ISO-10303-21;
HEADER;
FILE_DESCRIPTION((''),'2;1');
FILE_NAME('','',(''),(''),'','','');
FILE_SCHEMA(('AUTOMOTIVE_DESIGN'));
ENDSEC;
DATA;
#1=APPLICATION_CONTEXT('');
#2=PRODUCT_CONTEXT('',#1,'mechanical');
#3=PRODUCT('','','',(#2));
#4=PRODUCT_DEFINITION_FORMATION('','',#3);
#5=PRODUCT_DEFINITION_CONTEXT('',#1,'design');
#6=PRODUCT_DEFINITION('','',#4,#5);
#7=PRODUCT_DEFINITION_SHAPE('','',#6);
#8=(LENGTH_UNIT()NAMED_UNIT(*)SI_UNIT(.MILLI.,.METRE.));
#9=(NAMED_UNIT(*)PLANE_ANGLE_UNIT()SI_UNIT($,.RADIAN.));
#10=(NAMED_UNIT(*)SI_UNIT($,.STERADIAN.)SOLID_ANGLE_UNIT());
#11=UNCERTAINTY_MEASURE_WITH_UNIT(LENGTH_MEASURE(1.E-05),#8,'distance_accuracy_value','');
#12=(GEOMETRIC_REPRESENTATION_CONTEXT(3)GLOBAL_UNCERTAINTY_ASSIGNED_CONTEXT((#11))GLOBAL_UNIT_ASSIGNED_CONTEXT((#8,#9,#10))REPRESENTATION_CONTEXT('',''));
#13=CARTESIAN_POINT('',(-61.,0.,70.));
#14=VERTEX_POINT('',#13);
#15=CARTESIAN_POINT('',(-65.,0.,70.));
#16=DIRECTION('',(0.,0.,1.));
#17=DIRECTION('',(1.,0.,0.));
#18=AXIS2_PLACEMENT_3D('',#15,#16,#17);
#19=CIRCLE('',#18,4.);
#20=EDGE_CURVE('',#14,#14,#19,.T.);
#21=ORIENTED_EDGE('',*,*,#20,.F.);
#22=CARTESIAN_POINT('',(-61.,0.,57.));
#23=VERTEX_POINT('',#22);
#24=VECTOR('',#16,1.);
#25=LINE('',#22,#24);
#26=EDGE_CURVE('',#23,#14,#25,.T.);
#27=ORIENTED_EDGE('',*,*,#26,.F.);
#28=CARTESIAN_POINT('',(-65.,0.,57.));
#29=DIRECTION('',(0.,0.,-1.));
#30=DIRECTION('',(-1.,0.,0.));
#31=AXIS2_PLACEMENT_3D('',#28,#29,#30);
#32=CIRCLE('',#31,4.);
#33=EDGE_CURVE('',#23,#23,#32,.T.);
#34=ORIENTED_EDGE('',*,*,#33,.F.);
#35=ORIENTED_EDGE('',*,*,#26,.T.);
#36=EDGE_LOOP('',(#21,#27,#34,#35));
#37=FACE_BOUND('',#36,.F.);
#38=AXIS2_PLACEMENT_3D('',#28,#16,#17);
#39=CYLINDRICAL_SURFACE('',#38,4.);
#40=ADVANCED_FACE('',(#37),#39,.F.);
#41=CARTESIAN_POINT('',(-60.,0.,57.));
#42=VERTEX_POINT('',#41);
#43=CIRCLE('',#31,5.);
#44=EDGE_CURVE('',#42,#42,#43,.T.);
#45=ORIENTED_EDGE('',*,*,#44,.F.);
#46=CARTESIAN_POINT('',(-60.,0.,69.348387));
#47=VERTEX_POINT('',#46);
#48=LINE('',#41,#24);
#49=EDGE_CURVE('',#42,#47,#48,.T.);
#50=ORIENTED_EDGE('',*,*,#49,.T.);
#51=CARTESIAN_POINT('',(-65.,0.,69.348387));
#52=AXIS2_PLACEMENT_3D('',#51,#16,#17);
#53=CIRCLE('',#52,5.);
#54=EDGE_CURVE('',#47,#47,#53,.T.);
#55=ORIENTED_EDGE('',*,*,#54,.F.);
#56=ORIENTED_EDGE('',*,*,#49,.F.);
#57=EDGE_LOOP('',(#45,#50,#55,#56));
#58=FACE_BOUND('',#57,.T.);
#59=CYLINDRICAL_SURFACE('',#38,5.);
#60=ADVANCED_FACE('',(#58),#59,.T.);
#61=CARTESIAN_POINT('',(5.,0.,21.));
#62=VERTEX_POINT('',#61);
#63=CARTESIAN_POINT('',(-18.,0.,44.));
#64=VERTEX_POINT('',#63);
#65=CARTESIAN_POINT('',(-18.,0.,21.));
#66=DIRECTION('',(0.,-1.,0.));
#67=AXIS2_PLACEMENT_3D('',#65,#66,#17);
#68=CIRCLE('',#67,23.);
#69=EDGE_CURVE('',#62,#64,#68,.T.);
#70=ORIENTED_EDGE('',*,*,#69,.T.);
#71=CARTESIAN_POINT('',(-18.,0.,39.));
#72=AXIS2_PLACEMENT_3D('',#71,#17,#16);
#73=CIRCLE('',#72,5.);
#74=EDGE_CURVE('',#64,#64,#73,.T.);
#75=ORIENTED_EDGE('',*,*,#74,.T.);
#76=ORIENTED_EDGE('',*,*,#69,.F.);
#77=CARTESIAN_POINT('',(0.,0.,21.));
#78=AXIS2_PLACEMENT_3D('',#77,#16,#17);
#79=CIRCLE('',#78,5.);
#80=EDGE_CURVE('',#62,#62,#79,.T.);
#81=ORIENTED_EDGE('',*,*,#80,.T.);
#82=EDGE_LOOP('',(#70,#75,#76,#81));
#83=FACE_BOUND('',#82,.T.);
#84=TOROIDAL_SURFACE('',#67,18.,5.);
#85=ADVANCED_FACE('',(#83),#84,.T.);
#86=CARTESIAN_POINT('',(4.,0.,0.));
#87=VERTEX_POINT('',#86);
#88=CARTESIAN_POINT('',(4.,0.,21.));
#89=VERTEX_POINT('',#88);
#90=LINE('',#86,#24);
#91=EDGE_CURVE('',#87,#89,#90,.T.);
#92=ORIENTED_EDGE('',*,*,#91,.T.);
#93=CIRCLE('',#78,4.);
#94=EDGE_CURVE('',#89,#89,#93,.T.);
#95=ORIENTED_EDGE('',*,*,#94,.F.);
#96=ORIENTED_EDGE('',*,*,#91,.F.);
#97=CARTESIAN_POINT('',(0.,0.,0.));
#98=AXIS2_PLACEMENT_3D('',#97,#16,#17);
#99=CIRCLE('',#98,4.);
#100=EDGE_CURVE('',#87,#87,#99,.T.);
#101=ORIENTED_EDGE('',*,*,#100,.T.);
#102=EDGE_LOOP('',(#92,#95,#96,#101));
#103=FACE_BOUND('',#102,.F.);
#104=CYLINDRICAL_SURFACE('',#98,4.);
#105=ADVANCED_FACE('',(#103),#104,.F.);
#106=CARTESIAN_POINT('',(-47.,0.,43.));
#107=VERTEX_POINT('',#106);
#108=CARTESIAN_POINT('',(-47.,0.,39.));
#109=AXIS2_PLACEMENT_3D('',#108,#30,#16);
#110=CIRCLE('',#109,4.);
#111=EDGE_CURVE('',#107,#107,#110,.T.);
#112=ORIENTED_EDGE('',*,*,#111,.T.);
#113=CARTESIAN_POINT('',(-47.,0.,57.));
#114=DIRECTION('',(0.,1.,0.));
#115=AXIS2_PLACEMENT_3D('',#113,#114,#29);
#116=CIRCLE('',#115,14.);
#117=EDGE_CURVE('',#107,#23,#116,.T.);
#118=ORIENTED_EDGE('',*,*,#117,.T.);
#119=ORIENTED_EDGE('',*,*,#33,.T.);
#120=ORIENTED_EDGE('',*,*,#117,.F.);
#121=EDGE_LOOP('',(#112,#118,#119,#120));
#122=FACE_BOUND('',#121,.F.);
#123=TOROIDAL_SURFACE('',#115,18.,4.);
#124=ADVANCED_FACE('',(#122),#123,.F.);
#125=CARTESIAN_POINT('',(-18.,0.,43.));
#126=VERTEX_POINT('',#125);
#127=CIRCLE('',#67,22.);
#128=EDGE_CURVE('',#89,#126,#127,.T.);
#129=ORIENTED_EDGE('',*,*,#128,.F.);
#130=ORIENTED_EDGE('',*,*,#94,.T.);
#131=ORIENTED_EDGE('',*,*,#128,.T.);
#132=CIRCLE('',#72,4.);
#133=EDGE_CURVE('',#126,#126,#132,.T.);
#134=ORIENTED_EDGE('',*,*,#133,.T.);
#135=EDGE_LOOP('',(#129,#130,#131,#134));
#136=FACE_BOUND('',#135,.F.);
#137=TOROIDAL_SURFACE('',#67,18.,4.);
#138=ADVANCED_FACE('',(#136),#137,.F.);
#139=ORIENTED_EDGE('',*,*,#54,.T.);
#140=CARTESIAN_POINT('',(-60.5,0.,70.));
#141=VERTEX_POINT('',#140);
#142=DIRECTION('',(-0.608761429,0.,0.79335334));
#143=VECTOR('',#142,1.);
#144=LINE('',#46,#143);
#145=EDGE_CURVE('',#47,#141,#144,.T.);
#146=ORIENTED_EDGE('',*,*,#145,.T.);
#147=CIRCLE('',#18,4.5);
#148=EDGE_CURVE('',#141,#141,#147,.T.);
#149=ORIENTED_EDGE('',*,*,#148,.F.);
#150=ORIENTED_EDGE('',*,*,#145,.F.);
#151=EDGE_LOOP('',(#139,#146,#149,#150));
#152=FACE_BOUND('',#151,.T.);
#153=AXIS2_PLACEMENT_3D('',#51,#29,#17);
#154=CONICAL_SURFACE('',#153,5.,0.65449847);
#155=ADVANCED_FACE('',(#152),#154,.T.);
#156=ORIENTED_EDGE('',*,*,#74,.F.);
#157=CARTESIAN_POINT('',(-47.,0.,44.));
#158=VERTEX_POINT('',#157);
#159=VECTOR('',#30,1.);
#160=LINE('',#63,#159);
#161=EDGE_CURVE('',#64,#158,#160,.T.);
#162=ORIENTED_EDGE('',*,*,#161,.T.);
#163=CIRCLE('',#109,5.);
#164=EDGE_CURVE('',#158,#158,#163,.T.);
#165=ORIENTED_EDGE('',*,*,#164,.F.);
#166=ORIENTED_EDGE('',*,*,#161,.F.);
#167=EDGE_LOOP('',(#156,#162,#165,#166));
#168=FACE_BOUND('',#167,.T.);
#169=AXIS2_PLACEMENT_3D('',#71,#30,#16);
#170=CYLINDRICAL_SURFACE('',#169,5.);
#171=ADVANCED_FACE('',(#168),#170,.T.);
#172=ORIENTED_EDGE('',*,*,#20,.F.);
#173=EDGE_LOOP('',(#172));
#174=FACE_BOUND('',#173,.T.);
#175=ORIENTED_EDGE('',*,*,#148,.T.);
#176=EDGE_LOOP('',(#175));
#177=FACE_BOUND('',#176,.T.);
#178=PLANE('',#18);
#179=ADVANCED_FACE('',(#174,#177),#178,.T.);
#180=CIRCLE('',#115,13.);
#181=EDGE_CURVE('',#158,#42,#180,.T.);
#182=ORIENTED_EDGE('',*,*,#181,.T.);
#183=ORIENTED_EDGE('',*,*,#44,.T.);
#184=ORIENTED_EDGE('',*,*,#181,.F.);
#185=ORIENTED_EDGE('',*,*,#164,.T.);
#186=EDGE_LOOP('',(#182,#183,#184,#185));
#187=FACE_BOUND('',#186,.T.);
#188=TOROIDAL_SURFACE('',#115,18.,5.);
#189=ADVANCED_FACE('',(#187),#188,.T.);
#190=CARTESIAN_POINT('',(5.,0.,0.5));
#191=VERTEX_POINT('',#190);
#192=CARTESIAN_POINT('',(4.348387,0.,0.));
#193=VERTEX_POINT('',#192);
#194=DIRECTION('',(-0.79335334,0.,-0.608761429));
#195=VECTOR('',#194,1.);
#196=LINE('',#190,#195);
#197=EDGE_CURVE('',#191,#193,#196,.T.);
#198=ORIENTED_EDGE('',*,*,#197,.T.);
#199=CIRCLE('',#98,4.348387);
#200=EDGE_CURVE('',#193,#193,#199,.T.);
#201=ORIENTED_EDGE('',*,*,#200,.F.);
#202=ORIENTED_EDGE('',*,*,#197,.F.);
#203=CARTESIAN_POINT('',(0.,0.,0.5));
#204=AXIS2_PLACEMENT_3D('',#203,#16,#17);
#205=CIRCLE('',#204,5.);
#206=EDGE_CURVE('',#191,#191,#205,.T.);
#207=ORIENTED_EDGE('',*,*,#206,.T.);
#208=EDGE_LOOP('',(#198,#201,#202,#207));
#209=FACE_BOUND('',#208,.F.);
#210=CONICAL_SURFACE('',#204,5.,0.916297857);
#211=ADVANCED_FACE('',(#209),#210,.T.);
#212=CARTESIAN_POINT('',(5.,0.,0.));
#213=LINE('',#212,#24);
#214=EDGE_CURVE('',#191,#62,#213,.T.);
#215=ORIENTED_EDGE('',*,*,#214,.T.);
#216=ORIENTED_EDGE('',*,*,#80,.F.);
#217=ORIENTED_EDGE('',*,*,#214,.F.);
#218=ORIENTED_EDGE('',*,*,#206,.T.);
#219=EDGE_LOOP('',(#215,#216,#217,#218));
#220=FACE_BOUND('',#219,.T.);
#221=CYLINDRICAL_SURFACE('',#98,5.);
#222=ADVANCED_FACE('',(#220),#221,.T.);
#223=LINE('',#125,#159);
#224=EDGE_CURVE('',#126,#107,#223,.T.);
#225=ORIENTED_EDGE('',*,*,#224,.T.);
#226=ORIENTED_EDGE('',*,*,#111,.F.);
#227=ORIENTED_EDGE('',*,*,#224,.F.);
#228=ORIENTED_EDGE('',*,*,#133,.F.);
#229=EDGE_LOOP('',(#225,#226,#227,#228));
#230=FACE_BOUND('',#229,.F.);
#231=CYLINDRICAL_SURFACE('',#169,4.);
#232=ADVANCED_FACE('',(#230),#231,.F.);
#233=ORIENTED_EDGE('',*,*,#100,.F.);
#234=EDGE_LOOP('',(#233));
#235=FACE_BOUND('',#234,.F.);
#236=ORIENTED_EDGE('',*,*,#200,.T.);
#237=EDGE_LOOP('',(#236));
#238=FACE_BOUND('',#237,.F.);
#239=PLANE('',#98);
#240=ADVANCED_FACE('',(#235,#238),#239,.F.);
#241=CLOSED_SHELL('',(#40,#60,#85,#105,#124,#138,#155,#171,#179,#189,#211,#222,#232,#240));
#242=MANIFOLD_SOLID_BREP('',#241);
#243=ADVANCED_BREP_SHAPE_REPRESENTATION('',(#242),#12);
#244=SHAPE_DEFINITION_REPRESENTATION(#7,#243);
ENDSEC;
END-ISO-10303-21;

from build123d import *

# Parameters (mm, degrees)
F0_R        = 5
F0_R_2      = 4
F3_C1_SIZE2 = 0.6516126864
F3_C1_SIZE  = 0.5
F3_C2_SIZE2 = 0.5
F3_C2_SIZE  = 0.6516126864


with BuildPart() as f2:
    # F2: sweep along a path in F1
    with BuildLine(Plane.XZ) as f2_path:
        Line((0, 0), (0, 21))
        ThreePointArc((0, 21), (-5.2720779386, 33.7279220614), (-18, 39))
        Line((-18, 39), (-47, 39))
        ThreePointArc((-47, 39), (-59.7279220614, 44.2720779386), (-65, 57))
        Line((-65, 57), (-65, 70))
    # F0 (on Top) → F2 (sweep)
    with BuildSketch(Plane.XY):
        Circle(F0_R)
        Circle(F0_R_2, mode=Mode.SUBTRACT)
    sweep(path=f2_path.line)

    # F3: chamfer of 0.5 x 0.6516126864 on 2 edges, made by hand

    # F3_c1
    f3_c1_edges = [f2.edges().sort_by_distance(p)[0] for p in [
        (-5, 0, 0),
    ]]
    f3_c1_side = f2.faces().sort_by_distance((-5, 0, 0.01))[0]
    chamfer(f3_c1_edges, length=F3_C1_SIZE, length2=F3_C1_SIZE2, reference=f3_c1_side)

    # F3_c2
    f3_c2_edges = [f2.edges().sort_by_distance(p)[0] for p in [
        (-70, 0, 70),
    ]]
    f3_c2_side = f2.faces().sort_by_distance((-70, 0, 69.99))[0]
    chamfer(f3_c2_edges, length=F3_C2_SIZE, length2=F3_C2_SIZE2, reference=f3_c2_side)


solid = f2.part
